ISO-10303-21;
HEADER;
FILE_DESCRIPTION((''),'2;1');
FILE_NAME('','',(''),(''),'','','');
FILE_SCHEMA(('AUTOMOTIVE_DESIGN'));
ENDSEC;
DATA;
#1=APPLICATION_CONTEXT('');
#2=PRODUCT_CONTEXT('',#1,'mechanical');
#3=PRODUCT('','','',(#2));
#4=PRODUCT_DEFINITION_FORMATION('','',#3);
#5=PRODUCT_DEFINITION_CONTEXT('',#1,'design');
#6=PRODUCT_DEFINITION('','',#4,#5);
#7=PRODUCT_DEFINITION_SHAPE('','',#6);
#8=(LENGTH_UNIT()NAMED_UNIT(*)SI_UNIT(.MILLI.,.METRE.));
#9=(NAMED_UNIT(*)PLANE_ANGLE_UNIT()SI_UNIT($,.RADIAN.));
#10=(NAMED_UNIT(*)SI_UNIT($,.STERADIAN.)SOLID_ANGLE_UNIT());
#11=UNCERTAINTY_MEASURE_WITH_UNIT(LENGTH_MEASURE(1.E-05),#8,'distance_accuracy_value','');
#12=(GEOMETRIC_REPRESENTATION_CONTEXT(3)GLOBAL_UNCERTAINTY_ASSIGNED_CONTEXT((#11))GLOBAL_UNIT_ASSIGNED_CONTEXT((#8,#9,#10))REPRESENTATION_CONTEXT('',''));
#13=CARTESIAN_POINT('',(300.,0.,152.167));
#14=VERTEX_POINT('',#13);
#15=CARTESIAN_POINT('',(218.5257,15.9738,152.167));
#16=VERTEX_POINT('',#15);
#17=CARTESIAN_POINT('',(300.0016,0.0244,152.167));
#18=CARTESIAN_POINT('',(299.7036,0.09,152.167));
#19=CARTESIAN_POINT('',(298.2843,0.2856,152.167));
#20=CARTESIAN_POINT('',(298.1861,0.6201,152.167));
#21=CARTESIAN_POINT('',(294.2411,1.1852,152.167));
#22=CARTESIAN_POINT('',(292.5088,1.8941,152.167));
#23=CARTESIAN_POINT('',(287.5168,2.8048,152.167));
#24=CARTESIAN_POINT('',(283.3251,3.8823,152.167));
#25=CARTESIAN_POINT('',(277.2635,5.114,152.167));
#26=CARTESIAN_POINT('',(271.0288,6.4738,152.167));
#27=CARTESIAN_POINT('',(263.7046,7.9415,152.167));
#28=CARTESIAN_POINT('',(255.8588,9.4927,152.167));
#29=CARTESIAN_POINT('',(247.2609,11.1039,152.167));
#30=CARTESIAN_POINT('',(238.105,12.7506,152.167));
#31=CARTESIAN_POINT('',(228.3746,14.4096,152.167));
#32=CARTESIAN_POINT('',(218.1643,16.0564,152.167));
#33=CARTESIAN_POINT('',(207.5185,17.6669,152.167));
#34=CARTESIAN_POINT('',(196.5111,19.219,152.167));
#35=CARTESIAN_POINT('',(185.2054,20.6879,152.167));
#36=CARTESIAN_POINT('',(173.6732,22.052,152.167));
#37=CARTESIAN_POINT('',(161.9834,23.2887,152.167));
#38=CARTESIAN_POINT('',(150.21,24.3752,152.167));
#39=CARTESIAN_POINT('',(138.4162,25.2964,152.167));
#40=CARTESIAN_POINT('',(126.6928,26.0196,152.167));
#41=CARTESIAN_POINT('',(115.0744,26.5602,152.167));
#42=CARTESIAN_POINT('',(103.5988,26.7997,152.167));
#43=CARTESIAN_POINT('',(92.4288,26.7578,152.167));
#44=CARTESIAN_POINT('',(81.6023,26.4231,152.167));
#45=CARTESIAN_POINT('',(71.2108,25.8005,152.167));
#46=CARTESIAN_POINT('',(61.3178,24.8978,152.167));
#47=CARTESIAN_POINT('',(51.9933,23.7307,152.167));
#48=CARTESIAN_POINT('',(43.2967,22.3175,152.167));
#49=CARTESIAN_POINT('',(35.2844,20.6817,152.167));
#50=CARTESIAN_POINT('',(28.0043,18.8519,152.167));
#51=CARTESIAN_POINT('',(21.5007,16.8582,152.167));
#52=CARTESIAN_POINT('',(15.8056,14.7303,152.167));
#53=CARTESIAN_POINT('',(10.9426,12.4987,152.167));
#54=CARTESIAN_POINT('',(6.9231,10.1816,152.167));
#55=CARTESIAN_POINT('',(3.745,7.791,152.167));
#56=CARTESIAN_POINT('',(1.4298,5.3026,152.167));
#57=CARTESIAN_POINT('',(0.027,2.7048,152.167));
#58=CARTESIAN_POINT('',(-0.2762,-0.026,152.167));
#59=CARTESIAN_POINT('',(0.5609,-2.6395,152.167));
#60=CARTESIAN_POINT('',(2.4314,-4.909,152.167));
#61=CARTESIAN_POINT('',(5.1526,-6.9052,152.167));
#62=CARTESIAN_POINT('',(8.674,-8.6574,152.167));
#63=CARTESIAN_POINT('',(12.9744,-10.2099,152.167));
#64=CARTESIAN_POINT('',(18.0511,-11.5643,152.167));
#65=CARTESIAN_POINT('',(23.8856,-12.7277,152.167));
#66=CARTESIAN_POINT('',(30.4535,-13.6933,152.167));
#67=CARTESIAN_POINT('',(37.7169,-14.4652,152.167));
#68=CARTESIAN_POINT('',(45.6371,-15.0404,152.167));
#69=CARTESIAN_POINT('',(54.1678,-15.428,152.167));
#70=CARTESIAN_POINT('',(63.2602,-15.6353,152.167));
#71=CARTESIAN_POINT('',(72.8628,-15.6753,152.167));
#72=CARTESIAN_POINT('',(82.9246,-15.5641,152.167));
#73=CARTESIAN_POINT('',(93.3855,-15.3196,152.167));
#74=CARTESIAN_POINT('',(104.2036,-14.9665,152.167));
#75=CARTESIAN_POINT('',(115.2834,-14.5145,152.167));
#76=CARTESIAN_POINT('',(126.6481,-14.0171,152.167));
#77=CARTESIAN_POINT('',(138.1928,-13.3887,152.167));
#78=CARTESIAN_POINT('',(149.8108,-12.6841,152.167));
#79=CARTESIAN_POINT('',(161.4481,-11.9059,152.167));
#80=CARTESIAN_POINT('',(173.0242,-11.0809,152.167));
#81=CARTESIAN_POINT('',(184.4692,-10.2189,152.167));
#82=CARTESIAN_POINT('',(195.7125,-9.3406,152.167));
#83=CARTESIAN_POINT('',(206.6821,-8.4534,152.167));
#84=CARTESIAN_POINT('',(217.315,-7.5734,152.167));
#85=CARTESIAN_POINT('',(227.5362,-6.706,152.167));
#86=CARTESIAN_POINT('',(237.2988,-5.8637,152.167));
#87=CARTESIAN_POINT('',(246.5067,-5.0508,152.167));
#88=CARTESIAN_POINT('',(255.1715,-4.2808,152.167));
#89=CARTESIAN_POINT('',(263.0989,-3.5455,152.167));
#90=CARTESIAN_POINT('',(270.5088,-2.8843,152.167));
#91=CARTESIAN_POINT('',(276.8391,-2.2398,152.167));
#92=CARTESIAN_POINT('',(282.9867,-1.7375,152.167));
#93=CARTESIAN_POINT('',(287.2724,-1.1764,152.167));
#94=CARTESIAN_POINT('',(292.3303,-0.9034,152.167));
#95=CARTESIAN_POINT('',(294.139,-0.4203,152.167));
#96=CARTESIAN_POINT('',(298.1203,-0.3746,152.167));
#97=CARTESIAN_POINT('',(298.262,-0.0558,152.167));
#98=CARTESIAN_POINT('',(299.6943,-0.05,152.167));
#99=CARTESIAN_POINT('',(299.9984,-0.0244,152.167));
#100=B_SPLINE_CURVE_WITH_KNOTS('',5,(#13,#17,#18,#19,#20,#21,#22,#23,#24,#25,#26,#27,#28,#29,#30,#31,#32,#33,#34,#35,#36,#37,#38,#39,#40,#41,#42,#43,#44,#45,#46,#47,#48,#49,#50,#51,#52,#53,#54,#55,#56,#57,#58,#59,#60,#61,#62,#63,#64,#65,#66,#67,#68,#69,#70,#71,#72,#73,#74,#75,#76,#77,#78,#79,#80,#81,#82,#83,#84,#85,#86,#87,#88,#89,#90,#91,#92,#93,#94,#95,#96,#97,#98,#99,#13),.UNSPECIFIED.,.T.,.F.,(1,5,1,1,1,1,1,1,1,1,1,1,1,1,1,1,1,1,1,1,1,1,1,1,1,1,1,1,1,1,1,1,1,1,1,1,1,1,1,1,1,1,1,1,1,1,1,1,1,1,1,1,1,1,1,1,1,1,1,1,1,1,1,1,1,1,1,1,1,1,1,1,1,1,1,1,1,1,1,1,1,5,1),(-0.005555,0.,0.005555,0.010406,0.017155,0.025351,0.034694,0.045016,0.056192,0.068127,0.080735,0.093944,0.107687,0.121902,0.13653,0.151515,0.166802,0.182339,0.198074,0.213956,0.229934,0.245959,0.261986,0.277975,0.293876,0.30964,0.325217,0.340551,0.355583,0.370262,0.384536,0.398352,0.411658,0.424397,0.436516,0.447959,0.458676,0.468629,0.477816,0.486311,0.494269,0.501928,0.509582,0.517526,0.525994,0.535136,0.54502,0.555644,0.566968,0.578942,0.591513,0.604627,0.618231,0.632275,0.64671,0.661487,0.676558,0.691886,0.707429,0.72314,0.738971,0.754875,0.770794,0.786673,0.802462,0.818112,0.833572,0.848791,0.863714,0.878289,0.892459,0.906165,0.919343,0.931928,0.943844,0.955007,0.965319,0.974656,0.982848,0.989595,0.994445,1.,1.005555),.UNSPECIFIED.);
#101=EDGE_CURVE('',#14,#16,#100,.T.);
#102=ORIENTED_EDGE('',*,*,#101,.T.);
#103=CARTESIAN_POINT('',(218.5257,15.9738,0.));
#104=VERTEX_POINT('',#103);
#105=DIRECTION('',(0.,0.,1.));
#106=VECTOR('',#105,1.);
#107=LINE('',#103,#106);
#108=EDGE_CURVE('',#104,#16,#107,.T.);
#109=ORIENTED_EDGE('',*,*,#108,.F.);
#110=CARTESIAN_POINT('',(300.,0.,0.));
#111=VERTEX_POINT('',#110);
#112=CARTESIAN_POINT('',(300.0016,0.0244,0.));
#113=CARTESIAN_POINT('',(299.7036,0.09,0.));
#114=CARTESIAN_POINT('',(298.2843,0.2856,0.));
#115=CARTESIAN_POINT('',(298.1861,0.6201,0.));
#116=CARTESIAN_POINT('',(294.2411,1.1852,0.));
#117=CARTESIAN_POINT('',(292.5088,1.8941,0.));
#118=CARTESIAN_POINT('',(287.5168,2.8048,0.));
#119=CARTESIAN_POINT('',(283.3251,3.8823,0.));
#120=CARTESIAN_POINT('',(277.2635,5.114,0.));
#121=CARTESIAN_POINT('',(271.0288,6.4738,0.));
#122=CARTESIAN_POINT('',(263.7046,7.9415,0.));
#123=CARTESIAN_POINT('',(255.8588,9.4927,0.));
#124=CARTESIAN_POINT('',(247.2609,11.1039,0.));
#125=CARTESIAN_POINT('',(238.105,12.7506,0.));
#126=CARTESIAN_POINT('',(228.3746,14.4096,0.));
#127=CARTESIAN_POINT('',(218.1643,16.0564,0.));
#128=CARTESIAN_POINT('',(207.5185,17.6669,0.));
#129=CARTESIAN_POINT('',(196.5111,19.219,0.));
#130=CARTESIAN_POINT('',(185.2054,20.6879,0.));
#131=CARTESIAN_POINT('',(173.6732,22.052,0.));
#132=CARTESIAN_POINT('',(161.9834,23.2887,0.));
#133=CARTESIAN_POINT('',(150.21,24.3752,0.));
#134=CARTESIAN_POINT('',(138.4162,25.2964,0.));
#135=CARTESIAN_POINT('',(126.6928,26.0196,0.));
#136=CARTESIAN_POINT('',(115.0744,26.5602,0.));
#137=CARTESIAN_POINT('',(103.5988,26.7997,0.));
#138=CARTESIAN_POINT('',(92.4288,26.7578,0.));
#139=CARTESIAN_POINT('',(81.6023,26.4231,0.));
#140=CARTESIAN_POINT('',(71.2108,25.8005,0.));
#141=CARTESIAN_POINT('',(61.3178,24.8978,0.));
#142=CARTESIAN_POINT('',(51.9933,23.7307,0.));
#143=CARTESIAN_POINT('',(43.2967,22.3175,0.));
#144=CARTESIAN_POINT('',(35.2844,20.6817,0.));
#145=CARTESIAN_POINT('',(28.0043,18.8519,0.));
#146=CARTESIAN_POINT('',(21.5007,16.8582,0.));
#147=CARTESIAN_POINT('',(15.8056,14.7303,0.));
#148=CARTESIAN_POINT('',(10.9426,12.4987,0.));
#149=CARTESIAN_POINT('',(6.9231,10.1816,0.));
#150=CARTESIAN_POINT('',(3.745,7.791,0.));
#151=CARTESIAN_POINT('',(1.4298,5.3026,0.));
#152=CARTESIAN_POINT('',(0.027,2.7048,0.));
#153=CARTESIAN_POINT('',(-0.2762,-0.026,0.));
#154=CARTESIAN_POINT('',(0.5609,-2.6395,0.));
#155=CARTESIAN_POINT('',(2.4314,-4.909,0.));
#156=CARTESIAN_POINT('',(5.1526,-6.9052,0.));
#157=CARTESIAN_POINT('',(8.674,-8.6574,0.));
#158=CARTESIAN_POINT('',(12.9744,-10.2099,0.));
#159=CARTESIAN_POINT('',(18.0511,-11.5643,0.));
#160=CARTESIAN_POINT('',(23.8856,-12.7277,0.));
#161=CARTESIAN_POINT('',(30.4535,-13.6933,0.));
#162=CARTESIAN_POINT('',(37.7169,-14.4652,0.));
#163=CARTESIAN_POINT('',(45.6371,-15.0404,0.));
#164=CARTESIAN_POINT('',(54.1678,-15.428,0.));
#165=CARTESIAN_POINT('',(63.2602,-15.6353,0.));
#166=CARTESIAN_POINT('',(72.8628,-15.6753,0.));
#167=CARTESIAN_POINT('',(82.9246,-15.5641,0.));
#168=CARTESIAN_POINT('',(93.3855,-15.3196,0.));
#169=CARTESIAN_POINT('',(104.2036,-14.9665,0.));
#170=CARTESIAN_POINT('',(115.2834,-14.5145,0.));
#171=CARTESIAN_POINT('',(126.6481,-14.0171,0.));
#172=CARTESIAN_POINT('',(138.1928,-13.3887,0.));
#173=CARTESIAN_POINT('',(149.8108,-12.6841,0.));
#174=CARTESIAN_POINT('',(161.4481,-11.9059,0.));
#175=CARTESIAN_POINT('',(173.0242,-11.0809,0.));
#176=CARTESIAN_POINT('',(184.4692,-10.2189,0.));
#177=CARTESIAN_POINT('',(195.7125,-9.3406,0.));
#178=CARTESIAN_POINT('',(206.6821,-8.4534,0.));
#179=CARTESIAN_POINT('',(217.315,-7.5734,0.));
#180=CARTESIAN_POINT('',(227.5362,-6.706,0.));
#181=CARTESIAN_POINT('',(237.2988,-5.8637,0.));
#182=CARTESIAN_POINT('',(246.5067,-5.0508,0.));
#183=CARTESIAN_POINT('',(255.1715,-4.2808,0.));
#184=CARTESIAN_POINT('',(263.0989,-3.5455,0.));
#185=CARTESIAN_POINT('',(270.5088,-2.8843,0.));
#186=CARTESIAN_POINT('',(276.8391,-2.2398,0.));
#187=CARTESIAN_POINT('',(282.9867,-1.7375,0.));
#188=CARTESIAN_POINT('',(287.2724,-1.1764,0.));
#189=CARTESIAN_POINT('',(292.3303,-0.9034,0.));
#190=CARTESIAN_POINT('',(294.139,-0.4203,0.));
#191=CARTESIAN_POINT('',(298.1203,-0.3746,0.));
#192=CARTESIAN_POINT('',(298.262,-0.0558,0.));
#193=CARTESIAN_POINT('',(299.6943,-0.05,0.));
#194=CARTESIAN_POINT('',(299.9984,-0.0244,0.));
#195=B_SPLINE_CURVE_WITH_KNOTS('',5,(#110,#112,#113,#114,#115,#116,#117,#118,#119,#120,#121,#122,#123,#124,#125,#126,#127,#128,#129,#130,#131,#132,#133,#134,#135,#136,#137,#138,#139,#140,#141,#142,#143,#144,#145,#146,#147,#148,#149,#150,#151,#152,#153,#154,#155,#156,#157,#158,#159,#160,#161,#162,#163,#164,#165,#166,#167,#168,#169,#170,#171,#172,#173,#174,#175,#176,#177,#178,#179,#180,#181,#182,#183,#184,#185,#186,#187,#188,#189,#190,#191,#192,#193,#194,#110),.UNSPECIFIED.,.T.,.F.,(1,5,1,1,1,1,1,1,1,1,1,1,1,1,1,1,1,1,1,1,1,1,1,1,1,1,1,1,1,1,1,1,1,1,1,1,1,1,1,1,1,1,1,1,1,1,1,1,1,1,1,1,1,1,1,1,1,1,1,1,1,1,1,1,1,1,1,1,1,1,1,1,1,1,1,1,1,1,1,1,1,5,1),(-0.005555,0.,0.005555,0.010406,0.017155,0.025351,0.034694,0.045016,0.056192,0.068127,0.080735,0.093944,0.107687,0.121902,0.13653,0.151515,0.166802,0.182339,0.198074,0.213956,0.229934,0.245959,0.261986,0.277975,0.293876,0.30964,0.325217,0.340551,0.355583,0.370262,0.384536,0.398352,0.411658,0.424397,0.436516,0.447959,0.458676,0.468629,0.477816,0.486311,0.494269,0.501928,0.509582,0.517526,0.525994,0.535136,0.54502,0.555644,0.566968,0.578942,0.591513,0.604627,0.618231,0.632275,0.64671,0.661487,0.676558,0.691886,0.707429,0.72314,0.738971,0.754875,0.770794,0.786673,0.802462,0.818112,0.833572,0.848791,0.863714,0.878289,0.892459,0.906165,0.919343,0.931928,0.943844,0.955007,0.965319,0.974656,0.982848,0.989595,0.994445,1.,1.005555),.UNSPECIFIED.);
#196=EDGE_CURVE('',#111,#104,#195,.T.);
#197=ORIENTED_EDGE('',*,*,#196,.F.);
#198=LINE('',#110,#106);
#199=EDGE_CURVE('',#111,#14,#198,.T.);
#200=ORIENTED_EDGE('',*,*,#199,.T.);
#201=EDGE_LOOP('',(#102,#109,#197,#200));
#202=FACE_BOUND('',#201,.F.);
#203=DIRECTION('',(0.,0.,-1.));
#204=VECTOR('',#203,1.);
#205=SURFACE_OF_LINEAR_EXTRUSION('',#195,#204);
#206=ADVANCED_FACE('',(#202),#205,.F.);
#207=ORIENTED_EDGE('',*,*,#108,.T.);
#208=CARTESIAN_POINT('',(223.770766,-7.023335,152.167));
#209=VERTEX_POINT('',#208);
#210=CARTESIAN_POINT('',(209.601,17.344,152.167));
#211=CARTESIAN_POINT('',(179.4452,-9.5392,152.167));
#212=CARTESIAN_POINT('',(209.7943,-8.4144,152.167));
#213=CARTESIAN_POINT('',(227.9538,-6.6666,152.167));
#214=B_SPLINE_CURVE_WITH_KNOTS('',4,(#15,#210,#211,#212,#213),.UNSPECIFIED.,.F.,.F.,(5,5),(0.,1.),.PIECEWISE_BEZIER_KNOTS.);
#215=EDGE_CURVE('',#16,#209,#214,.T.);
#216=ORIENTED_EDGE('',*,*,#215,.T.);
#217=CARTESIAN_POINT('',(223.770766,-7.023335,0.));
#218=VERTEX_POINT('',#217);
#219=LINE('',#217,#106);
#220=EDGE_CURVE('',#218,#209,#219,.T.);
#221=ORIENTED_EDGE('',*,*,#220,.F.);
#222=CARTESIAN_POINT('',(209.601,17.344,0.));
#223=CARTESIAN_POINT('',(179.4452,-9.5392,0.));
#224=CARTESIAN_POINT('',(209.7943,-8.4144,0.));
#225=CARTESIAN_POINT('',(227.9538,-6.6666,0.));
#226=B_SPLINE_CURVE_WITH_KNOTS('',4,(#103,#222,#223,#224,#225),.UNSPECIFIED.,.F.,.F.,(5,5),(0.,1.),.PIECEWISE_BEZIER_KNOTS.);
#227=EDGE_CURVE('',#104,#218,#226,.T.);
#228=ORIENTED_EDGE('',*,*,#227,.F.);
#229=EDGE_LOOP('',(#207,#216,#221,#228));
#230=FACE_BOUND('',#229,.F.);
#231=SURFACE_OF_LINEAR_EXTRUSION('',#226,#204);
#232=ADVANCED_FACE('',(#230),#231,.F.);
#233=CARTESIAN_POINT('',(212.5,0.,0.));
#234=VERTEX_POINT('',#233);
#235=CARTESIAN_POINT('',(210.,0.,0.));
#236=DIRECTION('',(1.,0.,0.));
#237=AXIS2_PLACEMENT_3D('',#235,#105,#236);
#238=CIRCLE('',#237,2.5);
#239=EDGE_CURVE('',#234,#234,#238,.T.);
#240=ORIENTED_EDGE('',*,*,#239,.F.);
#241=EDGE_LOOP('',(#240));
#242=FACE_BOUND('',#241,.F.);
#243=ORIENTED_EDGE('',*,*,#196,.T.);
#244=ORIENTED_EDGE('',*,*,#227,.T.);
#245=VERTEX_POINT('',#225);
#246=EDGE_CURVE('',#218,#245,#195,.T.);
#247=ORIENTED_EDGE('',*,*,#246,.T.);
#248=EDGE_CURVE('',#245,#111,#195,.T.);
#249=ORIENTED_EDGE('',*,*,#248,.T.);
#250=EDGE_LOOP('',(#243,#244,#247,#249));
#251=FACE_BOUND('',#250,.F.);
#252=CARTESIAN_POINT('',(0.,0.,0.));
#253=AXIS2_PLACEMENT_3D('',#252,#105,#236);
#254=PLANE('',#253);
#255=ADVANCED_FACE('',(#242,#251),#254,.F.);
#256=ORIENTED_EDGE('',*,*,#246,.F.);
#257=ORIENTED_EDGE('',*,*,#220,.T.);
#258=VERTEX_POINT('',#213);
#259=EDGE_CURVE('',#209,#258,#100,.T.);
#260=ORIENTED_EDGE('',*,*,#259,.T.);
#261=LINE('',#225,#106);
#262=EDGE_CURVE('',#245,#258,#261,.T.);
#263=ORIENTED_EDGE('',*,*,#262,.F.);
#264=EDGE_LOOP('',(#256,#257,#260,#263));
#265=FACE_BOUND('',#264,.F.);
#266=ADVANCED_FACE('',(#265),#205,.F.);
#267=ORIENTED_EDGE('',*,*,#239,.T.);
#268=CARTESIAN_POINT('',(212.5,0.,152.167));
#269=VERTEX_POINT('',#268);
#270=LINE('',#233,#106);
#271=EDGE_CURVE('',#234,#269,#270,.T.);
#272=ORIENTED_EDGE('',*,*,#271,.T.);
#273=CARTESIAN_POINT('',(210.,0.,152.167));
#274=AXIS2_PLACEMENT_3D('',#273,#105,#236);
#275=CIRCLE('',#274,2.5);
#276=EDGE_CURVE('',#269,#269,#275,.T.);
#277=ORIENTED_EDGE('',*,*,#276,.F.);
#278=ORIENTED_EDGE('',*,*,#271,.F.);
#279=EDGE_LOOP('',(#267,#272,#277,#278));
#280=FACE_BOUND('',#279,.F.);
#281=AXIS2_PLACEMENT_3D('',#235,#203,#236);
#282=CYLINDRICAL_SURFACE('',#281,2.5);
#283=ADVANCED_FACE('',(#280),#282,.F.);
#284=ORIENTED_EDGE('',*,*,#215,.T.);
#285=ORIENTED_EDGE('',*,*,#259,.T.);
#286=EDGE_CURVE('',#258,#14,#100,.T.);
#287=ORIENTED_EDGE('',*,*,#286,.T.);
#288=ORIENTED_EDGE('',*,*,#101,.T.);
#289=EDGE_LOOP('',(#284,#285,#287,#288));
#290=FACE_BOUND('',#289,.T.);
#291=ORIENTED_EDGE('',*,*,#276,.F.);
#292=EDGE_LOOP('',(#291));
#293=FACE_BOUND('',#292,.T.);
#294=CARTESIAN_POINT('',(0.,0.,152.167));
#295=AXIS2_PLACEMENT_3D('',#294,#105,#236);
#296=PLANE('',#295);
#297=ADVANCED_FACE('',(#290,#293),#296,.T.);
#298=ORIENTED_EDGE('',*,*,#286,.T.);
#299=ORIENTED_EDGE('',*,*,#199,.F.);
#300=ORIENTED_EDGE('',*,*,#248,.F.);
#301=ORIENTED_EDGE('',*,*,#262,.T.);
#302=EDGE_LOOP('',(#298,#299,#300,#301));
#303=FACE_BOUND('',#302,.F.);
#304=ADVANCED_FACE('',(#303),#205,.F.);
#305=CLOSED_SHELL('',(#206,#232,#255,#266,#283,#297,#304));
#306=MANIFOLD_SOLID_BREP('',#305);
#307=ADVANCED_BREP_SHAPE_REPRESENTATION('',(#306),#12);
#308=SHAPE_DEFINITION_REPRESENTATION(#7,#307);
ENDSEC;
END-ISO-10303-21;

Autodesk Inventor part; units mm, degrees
ref_plane "YZ Plane" through (0, 0, 0) normal (1, 0, 0) x (0, 1, 0)
ref_plane "XZ Plane" through (0, 0, 0) normal (0, 1, 0) x (-1, 0, 0)
ref_plane "XY Plane" through (0, 0, 0) normal (0, 0, 1) x (1, 0, 0)
sketch "Sketch1" plane through (0, 0, 0) normal (0, 0, 1) x (1, 0, 0)
  spline S0 degree 5 poles (300, 0) (300.0016, 0.0244) (299.7036, 0.09) (298.2843, 0.2856) (298.1861, 0.6201) (294.2411, 1.1852) (292.5088, 1.8941) (287.5168, 2.8048) (283.3251, 3.8823) (277.2635, 5.114) (271.0288, 6.4738) (263.7046, 7.9415) (255.8588, 9.4927) (247.2609, 11.1039) (238.105, 12.7506) (228.3746, 14.4096) (218.1643, 16.0564) (207.5185, 17.6669) (196.5111, 19.219) (185.2054, 20.6879) (173.6732, 22.052) (161.9834, 23.2887) (150.21, 24.3752) (138.4162, 25.2964) (126.6928, 26.0196) (115.0744, 26.5602) (103.5988, 26.7997) (92.4288, 26.7578) (81.6023, 26.4231) (71.2108, 25.8005) (61.3178, 24.8978) (51.9933, 23.7307) (43.2967, 22.3175) (35.2844, 20.6817) (28.0043, 18.8519) (21.5007, 16.8582) (15.8056, 14.7303) (10.9426, 12.4987) (6.9231, 10.1816) (3.745, 7.791) (1.4298, 5.3026) (0.027, 2.7048) (-0.2762, -0.026) (0.5609, -2.6395) (2.4314, -4.909) (5.1526, -6.9052) (8.674, -8.6574) (12.9744, -10.2099) (18.0511, -11.5643) (23.8856, -12.7277) (30.4535, -13.6933) (37.7169, -14.4652) (45.6371, -15.0404) (54.1678, -15.428) (63.2602, -15.6353) (72.8628, -15.6753) (82.9246, -15.5641) (93.3855, -15.3196) (104.2036, -14.9665) (115.2834, -14.5145) (126.6481, -14.0171) (138.1928, -13.3887) (149.8108, -12.6841) (161.4481, -11.9059) (173.0242, -11.0809) (184.4692, -10.2189) (195.7125, -9.3406) (206.6821, -8.4534) (217.315, -7.5734) (227.5362, -6.706) (237.2988, -5.8637) (246.5067, -5.0508) (255.1715, -4.2808) (263.0989, -3.5455) (270.5088, -2.8843) (276.8391, -2.2398) (282.9867, -1.7375) (287.2724, -1.1764) (292.3303, -0.9034) (294.139, -0.4203) (298.1203, -0.3746) (298.262, -0.0558) (299.6943, -0.05) (299.9984, -0.0244) (300, 0) knots 0 0 0 0 0 0 0.005555 0.010406 0.017155 0.025351 0.034694 0.045016 0.056192 0.068127 0.080735 0.093944 0.107687 0.121902 0.13653 0.151515 0.166802 0.182339 0.198074 0.213956 0.229934 0.245959 0.261986 0.277975 0.293876 0.30964 0.325217 0.340551 0.355583 0.370262 0.384536 0.398352 0.411658 0.424397 0.436516 0.447959 0.458676 0.468629 0.477816 0.486311 0.494269 0.501928 0.509582 0.517526 0.525994 0.535136 0.54502 0.555644 0.566968 0.578942 0.591513 0.604627 0.618231 0.632275 0.64671 0.661487 0.676558 0.691886 0.707429 0.72314 0.738971 0.754875 0.770794 0.786673 0.802462 0.818112 0.833572 0.848791 0.863714 0.878289 0.892459 0.906165 0.919343 0.931928 0.943844 0.955007 0.965319 0.974656 0.982848 0.989595 0.994445 1 1 1 1 1 1
  line L0 (200, 103) -> (200, -97) construction
  line L1 (0, -164.4758) -> (0, 307.8549) construction
  line L2 (210, 0) -> (210, -12) construction
  line L3 (210, 0) -> (222, 0) construction
  spline S1 degree 4 poles (218.5257, 15.9738) (209.601, 17.344) (179.4452, -9.5392) (209.7943, -8.4144) (227.9538, -6.6666) knots 0 0 0 0 0 1 1 1 1 1
  line L4 (221.1774, 15.5667) -> (215.874, 16.3809) construction
  arc A0 (220.2542, 15.1852) -> (216.6402, 15.74) centre (217.9961, 12.5243) ccw construction
  line L5 (222.2571, -7.2149) -> (233.6505, -6.1183) construction
  arc A1 (223.3931, -7.0631) -> (232.5064, -6.186) centre (204.1762, 240.3791) ccw construction
  circle A2 centre (210, 0) radius 2.5
  point P0 (0, 0)
  point P1 (298.1739, 0.4338)
  point P2 (295.9008, 0.9681)
  point P3 (292.7367, 1.7025)
  point P4 (288.6996, 2.6229)
  point P5 (283.8129, 3.7134)
  point P6 (278.1048, 4.9545)
  point P7 (271.6086, 6.3255)
  point P8 (264.3621, 7.8039)
  point P9 (256.4085, 9.3663)
  point P10 (247.7946, 10.9887)
  point P11 (238.572, 12.6468)
  point P12 (228.7959, 14.3166)
  point P13 (207.8235, 17.5944)
  point P14 (196.755, 19.155)
  point P15 (185.388, 20.6319)
  point P16 (173.7924, 22.0023)
  point P17 (162.0405, 23.2434)
  point P18 (150.2055, 24.3336)
  point P19 (138.3615, 25.2522)
  point P20 (126.5832, 25.98)
  point P21 (114.8976, 26.493)
  point P22 (103.3635, 26.7315)
  point P23 (92.1183, 26.6775)
  point P24 (81.2367, 26.3292)
  point P25 (70.7922, 25.689)
  point P26 (60.8541, 24.7656)
  point P27 (51.489, 23.5734)
  point P28 (42.7587, 22.131)
  point P29 (34.7199, 20.4618)
  point P30 (27.4239, 18.5934)
  point P31 (20.9172, 16.5555)
  point P32 (15.2385, 14.379)
  point P33 (10.422, 12.0954)
  point P34 (6.4944, 9.7347)
  point P35 (3.4767, 7.3239)
  point P36 (1.3836, 4.8867)
  point P37 (0.2238, 2.4411)
  point P38 (0, 0)
  point P39 (0.7011, -2.3487)
  point P40 (2.31, -4.5201)
  point P41 (4.8123, -6.5094)
  point P42 (8.1885, -8.3112)
  point P43 (12.414, -9.9204)
  point P44 (17.4594, -11.3319)
  point P45 (23.2908, -12.5418)
  point P46 (29.871, -13.5477)
  point P47 (37.1583, -14.3505)
  point P48 (45.1092, -14.9526)
  point P49 (53.6766, -15.3609)
  point P50 (62.8101, -15.5853)
  point P51 (72.4581, -15.639)
  point P52 (82.566, -15.5385)
  point P53 (93.0768, -15.3033)
  point P54 (103.9314, -14.9544)
  point P55 (115.0689, -14.514)
  point P56 (126.4866, -13.9956)
  point P57 (138.1008, -13.3755)
  point P58 (149.7945, -12.6672)
  point P59 (161.4972, -11.8896)
  point P60 (173.1378, -11.061)
  point P61 (184.6455, -10.1973)
  point P62 (195.9501, -9.3141)
  point P63 (206.9814, -8.4237)
  point P64 (217.6716, -7.5381)
  point P65 (227.9538, -6.6666)
  point P66 (237.7638, -5.8185)
  point P67 (247.0398, -5.0019)
  point P68 (255.7236, -4.2234)
  point P69 (263.7597, -3.4905)
  point P70 (271.0965, -2.8098)
  point P71 (277.6872, -2.1882)
  point P72 (283.4889, -1.6323)
  point P73 (288.4641, -1.1487)
  point P74 (292.5804, -0.7434)
  point P75 (295.8102, -0.4221)
  point P76 (298.1328, -0.1887)
  point P77 (299.5323, -0.0474)
  point P78 (200, 0)
  point P79 (223.7705, -7.0234)
  dimension "d0" = 200
  dimension "d2" = 200
  dimension "d3" = 12
  dimension "d4" = 90
  dimension "d5" = 10
  dimension "d17" = 5
extrude "Extrusion2" add sketch "Sketch1" along normal blind 152.167 contours S0 S1 picked at (264.3061, 0.3433)
properties part number "4P.01.01.01-TW-v1-Flap Shape Definition"
